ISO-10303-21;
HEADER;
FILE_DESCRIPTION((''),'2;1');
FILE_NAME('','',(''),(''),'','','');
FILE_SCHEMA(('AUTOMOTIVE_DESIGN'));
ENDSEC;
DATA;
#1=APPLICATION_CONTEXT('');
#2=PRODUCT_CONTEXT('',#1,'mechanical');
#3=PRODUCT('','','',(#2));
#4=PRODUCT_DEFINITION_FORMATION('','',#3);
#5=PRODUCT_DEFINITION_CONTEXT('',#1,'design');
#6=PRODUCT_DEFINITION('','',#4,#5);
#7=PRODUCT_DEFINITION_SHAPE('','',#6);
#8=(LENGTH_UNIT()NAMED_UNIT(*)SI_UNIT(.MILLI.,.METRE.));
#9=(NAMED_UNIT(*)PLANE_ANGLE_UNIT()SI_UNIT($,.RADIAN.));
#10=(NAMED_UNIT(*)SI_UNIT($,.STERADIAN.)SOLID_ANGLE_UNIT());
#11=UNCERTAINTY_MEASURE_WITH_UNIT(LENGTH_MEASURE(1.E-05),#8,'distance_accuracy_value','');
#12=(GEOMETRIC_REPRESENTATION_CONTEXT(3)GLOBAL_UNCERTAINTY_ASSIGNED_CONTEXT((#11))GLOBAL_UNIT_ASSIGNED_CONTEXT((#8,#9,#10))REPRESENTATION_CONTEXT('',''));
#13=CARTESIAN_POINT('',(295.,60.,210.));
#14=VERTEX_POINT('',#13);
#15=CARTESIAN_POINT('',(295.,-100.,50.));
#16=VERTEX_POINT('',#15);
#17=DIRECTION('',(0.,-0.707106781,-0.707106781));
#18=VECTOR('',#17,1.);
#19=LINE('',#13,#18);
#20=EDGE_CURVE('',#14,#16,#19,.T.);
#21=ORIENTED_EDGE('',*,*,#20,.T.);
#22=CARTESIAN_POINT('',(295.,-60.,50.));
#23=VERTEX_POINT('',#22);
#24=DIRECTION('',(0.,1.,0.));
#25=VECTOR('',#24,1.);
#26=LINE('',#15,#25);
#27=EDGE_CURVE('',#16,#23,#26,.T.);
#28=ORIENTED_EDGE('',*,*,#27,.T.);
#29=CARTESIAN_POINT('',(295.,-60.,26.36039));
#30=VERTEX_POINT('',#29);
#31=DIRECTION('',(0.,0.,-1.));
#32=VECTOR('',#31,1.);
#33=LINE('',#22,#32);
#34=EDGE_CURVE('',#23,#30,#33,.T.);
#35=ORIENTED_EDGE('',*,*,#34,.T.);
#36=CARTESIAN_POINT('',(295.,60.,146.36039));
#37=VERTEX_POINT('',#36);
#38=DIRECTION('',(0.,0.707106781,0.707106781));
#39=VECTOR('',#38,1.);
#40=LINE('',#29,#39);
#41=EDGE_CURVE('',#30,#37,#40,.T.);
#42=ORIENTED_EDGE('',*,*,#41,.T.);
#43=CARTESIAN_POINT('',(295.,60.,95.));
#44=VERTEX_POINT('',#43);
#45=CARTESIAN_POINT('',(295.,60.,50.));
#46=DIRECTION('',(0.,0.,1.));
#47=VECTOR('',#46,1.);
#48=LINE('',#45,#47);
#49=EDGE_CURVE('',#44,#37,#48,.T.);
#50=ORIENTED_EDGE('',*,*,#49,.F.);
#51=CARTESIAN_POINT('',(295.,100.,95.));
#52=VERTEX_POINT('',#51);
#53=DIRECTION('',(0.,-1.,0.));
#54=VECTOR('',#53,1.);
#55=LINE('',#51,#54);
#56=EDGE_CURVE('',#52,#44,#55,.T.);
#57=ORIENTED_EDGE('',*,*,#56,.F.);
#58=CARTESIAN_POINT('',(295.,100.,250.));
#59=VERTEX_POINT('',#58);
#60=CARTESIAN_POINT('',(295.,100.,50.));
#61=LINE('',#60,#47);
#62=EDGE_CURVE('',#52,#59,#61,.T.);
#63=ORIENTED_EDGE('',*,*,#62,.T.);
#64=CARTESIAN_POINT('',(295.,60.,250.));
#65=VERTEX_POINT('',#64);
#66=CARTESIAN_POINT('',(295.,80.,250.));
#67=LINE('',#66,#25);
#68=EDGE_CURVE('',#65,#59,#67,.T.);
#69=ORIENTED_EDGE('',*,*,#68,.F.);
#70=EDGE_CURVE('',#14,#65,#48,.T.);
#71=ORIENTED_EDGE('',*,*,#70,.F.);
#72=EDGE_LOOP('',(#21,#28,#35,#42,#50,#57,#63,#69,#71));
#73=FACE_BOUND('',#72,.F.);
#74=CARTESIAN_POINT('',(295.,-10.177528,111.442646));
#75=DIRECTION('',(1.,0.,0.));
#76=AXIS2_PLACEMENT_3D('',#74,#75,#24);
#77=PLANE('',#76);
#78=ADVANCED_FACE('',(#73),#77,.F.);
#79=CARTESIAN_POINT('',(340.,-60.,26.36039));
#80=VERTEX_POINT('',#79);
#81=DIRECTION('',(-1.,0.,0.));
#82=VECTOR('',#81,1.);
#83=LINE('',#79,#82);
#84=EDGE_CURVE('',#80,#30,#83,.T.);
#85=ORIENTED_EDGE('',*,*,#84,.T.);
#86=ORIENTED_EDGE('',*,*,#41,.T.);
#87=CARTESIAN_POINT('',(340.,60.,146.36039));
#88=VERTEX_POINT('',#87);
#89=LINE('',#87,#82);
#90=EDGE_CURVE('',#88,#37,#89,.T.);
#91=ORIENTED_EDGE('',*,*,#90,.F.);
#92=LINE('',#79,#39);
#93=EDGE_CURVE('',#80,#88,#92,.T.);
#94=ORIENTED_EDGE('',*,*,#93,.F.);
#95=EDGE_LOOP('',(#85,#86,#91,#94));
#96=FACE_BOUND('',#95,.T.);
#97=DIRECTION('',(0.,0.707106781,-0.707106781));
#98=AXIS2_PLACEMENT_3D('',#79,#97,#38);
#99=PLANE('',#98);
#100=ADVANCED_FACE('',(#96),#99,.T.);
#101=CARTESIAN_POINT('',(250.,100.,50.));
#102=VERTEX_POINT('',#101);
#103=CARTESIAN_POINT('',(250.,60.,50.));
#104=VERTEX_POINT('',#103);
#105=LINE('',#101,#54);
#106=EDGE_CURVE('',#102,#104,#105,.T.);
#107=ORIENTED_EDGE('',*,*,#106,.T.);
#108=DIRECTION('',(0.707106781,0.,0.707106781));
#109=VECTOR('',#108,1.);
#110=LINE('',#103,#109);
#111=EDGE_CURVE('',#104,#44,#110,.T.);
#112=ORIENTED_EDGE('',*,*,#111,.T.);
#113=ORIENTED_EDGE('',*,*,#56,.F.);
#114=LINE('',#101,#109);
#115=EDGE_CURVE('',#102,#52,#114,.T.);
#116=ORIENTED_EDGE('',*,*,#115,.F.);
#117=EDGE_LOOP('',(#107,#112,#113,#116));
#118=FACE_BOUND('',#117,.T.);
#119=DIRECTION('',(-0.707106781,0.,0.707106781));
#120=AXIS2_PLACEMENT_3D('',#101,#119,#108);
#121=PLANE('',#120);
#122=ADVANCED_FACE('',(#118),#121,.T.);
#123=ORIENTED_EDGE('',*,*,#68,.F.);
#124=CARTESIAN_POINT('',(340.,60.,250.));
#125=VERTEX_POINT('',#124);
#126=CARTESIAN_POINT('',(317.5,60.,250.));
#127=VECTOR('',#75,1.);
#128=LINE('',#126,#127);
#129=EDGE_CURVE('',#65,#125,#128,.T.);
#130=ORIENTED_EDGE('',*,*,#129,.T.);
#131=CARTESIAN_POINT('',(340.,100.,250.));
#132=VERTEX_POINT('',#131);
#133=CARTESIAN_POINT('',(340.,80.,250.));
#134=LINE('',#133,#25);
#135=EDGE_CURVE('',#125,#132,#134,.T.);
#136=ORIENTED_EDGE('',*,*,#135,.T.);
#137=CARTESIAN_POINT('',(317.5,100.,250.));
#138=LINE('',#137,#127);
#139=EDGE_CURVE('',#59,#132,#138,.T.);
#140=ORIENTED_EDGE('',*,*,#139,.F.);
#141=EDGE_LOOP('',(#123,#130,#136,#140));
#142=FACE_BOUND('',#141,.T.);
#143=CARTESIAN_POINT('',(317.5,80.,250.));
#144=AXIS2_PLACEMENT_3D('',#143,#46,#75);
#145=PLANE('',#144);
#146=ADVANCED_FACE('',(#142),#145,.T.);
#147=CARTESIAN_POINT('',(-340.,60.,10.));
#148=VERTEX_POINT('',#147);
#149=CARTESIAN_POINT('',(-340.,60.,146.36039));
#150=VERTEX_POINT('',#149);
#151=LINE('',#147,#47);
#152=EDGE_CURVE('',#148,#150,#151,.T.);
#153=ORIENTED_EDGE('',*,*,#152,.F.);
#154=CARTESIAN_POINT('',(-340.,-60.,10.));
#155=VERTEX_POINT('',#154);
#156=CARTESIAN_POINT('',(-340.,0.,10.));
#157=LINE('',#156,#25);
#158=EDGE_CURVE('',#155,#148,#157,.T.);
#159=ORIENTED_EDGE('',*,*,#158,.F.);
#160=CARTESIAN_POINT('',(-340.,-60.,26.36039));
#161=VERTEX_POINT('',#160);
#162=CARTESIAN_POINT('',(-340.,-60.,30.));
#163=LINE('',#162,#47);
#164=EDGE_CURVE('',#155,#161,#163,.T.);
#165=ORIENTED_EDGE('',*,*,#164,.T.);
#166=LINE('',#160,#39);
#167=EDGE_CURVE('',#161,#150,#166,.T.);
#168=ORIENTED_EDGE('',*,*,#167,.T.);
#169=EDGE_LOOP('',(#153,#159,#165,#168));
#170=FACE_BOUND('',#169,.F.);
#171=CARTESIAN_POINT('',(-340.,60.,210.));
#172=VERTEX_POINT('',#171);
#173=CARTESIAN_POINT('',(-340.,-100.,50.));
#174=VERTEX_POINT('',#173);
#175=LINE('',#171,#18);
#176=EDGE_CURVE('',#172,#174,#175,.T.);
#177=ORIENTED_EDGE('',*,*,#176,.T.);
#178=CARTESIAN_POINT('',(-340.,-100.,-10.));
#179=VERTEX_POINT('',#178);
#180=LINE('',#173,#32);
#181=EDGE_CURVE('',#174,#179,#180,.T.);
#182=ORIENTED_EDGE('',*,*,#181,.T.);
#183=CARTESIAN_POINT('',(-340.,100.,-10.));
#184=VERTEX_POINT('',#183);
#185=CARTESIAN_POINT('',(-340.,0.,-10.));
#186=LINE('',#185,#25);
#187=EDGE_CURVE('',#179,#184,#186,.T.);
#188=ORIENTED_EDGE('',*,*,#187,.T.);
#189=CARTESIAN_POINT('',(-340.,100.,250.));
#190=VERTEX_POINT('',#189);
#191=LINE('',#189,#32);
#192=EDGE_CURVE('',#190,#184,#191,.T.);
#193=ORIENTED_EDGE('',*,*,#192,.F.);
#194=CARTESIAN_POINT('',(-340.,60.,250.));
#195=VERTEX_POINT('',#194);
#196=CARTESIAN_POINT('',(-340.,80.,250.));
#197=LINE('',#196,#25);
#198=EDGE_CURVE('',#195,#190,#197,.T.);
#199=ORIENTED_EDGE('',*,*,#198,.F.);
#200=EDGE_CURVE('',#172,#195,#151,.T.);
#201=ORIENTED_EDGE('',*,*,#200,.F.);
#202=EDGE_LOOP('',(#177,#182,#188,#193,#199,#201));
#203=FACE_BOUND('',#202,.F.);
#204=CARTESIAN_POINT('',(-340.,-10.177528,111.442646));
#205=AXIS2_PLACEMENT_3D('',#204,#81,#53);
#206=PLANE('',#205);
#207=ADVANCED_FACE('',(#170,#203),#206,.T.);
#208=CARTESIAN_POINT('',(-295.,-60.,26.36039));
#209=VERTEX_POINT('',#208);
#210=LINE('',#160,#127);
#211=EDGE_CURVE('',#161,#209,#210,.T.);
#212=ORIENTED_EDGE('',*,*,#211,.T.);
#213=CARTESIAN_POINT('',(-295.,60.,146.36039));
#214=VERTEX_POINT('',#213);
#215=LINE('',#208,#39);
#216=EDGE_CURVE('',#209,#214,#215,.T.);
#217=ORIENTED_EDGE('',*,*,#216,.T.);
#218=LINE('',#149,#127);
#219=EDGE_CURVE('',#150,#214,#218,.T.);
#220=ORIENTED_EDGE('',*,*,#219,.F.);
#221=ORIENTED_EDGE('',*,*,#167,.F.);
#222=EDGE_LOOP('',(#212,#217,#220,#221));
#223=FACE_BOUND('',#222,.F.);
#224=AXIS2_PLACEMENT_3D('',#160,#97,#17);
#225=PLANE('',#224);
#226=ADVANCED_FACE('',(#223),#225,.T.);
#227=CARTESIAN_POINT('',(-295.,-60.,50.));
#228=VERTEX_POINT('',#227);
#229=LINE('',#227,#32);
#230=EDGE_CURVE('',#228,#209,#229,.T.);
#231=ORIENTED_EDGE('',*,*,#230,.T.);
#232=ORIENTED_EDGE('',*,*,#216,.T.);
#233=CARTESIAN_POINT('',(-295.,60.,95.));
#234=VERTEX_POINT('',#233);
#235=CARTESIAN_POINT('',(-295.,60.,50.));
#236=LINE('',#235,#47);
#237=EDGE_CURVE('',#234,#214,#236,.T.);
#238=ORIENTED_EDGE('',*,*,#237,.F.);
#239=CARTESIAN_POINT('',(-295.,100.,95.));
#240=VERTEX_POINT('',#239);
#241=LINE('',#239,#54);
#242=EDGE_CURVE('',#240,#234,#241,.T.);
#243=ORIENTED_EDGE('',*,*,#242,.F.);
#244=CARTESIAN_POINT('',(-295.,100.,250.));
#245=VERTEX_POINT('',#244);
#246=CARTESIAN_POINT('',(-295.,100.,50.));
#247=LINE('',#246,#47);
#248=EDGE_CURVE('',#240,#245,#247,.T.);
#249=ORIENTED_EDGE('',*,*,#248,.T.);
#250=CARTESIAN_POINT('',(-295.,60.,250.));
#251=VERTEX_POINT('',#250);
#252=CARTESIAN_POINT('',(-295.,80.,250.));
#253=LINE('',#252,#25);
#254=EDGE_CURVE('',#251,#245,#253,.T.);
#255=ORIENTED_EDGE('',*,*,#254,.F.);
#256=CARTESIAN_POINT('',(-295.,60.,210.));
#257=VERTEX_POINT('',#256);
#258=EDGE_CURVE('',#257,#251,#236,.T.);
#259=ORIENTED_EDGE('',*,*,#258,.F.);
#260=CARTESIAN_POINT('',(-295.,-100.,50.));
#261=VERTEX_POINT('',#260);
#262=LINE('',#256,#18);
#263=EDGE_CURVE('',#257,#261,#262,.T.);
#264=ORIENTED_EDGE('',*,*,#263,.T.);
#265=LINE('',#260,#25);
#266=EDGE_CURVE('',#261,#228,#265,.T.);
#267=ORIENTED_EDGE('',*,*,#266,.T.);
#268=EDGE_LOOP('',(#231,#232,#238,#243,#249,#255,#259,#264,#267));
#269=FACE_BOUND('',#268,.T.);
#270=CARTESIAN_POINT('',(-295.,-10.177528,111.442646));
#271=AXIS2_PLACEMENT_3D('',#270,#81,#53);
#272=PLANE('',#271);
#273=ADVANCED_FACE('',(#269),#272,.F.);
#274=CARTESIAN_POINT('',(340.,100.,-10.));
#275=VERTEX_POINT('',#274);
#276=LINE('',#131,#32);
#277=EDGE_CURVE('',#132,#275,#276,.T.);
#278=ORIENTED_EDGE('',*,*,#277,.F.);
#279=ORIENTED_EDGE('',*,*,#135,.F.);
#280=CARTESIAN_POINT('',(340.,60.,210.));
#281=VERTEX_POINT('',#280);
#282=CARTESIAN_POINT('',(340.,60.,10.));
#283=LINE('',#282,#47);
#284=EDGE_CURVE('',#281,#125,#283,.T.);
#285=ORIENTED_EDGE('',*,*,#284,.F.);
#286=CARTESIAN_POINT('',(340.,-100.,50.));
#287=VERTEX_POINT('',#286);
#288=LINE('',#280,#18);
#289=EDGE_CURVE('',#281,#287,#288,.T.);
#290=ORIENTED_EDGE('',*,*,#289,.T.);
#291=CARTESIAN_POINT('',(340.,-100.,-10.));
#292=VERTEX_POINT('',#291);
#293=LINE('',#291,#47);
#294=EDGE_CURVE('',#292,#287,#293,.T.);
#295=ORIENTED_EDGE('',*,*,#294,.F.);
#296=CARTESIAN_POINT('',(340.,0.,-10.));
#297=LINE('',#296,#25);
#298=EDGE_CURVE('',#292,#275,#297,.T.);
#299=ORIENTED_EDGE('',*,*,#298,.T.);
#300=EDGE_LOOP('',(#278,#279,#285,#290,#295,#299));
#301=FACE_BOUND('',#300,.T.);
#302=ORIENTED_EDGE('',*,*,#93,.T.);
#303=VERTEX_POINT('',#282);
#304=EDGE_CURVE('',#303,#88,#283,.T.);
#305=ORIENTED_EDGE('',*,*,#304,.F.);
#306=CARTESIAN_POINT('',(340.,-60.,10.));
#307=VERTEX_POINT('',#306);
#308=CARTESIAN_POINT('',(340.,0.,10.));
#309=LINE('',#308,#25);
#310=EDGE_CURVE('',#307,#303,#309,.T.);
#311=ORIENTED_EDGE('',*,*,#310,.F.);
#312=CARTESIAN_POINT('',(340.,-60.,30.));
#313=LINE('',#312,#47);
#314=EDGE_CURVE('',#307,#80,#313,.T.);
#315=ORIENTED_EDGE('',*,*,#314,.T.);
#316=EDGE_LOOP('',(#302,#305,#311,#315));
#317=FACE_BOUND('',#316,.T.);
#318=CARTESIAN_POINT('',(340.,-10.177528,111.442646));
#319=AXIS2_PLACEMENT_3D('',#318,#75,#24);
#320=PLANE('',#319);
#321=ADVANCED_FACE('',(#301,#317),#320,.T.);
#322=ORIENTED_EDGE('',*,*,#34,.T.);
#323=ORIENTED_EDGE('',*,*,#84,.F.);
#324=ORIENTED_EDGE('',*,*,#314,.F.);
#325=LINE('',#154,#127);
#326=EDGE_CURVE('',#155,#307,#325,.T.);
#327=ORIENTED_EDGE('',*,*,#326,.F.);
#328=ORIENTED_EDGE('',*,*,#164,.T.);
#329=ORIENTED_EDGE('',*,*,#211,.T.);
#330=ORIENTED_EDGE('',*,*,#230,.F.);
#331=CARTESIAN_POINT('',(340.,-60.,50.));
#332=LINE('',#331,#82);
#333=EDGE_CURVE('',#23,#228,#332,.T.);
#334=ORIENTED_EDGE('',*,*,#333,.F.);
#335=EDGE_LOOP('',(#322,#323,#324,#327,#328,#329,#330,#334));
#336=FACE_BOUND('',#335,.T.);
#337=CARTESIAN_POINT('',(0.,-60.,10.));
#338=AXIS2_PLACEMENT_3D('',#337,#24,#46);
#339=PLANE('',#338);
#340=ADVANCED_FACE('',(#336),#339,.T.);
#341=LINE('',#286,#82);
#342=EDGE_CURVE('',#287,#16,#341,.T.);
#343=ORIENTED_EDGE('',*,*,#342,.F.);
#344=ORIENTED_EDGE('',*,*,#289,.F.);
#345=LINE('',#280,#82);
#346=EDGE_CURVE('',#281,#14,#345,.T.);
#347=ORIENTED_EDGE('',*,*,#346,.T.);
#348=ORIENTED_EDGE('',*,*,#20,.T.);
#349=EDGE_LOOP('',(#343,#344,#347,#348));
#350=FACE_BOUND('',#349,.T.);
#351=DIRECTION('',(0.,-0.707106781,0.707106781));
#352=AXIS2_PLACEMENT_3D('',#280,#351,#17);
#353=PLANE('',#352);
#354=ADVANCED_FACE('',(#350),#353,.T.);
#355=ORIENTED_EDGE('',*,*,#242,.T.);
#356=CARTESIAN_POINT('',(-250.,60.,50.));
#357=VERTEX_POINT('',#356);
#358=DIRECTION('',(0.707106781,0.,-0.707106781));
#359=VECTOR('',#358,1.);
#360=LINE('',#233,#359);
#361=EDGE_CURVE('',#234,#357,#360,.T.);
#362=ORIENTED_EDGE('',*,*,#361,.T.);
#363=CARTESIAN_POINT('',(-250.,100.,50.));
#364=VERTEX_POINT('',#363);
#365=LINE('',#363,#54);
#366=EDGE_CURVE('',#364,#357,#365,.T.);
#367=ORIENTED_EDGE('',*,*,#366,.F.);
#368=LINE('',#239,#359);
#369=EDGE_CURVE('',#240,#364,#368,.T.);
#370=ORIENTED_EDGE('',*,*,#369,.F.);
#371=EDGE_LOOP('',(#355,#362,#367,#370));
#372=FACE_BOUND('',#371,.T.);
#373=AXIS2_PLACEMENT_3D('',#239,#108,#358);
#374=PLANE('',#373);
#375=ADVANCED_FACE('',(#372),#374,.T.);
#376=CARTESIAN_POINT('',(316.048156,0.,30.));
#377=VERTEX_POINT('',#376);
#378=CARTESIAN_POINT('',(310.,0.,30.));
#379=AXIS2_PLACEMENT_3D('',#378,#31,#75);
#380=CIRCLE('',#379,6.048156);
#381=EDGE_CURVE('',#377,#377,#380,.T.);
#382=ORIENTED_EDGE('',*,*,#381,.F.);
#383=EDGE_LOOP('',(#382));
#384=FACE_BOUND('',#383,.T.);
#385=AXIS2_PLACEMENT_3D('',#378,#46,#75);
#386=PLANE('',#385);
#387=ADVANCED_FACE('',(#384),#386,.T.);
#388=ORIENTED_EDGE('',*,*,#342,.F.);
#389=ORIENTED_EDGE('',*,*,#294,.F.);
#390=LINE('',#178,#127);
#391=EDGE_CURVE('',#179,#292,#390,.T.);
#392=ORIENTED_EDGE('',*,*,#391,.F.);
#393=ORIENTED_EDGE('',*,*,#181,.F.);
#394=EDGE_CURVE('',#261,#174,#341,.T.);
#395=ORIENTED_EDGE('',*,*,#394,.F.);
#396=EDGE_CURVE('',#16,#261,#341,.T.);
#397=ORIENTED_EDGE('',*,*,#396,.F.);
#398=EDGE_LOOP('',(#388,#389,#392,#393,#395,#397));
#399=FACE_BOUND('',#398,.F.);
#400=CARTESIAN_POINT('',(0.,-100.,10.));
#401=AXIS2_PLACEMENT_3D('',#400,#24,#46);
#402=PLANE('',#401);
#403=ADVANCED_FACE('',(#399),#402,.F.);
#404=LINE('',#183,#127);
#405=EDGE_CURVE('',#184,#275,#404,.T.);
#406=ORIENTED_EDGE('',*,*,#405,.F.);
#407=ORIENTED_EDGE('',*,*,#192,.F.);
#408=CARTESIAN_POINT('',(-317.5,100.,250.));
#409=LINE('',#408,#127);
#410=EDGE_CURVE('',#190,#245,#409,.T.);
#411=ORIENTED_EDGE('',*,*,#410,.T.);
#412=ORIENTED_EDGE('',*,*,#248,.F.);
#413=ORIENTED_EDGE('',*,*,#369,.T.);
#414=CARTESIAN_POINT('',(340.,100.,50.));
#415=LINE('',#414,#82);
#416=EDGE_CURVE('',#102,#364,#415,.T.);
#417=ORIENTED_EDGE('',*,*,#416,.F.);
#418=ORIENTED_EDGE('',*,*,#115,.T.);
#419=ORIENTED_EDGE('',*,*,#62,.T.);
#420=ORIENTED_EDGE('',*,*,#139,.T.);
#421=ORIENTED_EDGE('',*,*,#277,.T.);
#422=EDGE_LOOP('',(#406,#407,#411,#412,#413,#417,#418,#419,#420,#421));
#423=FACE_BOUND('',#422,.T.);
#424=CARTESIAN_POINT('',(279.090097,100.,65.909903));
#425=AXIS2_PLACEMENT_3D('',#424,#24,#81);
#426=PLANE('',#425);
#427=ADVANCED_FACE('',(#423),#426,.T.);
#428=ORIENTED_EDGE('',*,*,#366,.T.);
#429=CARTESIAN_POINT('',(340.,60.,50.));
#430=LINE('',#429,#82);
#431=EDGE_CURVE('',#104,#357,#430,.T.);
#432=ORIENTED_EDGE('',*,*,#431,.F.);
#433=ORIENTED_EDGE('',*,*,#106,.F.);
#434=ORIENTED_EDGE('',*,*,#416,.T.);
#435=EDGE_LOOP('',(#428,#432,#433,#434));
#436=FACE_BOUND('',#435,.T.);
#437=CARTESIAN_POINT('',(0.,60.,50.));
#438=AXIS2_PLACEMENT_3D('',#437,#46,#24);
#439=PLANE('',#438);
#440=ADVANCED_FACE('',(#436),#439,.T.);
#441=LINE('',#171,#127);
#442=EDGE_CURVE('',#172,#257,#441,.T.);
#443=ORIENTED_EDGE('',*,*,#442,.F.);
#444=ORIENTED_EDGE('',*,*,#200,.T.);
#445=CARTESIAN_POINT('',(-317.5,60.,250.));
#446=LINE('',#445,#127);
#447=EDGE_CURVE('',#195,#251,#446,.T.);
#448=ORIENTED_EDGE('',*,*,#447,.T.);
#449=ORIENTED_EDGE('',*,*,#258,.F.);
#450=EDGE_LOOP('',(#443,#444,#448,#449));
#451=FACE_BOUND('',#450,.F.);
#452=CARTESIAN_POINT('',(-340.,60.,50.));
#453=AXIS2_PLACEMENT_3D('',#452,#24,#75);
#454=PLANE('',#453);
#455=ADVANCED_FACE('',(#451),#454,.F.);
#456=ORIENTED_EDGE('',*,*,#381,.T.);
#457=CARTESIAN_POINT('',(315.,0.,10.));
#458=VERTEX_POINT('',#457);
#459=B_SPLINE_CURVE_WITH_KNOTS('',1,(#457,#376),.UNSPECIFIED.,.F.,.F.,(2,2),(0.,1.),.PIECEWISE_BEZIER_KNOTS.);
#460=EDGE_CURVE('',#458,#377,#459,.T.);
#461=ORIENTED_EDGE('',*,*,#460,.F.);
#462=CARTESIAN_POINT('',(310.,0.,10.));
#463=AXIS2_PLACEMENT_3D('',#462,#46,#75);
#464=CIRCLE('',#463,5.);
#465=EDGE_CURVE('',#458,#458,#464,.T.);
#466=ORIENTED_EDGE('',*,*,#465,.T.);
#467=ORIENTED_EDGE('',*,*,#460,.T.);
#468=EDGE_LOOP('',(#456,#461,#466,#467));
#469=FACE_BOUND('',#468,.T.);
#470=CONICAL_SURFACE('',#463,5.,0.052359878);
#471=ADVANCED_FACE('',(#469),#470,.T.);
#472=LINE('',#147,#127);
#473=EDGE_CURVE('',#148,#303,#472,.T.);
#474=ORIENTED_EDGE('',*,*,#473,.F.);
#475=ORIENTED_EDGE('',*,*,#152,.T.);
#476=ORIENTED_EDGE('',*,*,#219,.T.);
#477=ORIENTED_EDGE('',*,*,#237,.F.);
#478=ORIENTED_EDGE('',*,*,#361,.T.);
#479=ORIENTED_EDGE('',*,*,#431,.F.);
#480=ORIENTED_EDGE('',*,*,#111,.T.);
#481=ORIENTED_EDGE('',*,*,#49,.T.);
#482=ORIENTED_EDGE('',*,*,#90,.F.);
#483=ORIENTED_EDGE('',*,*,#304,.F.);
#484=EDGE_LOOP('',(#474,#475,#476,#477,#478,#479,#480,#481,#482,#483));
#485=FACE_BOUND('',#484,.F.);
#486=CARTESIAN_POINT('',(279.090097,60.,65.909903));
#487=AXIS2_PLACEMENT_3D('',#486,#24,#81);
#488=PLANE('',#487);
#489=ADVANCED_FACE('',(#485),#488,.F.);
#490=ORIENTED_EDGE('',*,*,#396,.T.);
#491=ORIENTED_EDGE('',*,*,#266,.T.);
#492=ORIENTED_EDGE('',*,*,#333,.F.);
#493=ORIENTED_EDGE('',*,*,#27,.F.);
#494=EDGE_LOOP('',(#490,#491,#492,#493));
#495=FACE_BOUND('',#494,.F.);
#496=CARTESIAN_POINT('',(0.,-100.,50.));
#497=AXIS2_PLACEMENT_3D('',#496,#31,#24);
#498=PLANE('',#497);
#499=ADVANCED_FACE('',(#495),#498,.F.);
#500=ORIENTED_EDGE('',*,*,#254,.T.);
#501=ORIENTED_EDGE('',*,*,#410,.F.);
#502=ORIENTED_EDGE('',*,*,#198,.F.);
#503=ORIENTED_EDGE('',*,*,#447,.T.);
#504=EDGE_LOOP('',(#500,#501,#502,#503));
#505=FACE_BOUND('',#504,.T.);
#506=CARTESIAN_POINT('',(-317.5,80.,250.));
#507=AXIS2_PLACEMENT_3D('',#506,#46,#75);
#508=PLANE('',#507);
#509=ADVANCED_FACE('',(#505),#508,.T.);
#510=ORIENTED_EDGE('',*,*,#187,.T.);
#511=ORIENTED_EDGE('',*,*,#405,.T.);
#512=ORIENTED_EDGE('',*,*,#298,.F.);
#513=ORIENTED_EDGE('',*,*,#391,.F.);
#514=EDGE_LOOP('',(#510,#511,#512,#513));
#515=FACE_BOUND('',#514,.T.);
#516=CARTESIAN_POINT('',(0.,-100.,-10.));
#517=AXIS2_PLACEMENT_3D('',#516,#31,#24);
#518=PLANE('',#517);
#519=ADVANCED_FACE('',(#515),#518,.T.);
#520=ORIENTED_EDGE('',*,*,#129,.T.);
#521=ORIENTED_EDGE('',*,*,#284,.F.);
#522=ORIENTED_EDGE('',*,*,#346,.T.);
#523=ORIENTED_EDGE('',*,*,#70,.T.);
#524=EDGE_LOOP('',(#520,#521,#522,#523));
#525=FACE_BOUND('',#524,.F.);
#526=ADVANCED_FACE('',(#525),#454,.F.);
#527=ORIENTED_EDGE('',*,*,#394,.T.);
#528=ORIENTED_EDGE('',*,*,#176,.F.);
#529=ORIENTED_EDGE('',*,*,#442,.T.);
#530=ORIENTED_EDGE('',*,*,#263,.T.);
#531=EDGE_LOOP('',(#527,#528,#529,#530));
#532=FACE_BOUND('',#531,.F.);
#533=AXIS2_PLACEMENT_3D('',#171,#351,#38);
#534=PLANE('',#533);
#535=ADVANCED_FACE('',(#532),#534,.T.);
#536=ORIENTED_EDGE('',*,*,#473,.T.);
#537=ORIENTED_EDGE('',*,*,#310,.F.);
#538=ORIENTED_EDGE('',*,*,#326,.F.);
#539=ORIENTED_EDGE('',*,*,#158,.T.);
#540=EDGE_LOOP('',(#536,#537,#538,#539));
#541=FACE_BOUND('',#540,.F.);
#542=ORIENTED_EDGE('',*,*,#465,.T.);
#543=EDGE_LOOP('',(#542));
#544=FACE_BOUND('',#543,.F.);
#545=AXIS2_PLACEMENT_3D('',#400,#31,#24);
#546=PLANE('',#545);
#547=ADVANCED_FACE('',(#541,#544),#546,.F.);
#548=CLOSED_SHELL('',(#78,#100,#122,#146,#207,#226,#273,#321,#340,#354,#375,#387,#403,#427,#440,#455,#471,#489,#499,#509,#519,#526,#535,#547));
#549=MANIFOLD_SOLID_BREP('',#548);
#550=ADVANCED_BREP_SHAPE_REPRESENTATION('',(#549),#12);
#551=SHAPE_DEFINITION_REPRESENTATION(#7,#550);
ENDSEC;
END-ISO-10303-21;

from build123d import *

# Parameters (mm, degrees)
F0_W      = 200
F0_H      = 20
F1_DEPTH  = 340
F2_W      = 40
F2_H      = 40
F3_DEPTH  = 340
F4_W      = 45
F4_H      = 40
F5_DEPTH  = 200
F7_DEPTH  = 45
F9_DEPTH  = 40
F10_R     = 5
F11_DEPTH = 20
F11_TAPER = -3


# Not quite as in the source:
# - a pattern or mirror of a feature is missing from the dataset's text; its kind, count and spacing are read off the source's solid


with BuildPart() as f1:
    # F0 (on Right) → F1 (new body, symmetric)
    with BuildSketch(Plane.YZ):
        Rectangle(F0_W, F0_H)
    extrude(amount=F1_DEPTH, both=True)

    # F2 (on Right) → F3 (join, symmetric)
    with BuildSketch(Plane.YZ):
        with Locations((80, 30)):
            Rectangle(F2_W, F2_H)
        with Locations((-80, 30)):
            Rectangle(F2_W, F2_H)
    extrude(amount=F3_DEPTH, both=True)

    # F4 (on face) → F5 (join)
    with BuildSketch(Plane.XY.offset(50)):
        with Locations((-317.5, 80)):
            Rectangle(F4_W, F4_H)
        with Locations((317.5, 80)):
            Rectangle(F4_W, F4_H)
    extrude(amount=F5_DEPTH)

    # F6 (on face) → F7 (join)
    with BuildSketch(Plane.YZ.offset(340)):
        Polygon((60, 210), (-100, 50), (-60, 50), (-60, 26.3603896932), (60, 146.3603896932), align=None)
    f7 = extrude(amount=-F7_DEPTH)

    # F7_copies: F7 across plane
    add(f7.mirror(Plane(origin=(0, 0, 0), x_dir=(0, 0, -1), z_dir=(-1, 0, 0))))

    # F8 (on face) → F9 (join)
    with BuildSketch(Plane(origin=(0, 100, 0), x_dir=(-1, 0, 0), z_dir=(0, 1, 0))):
        Polygon((-250, 50), (-295, 95), (-295, 50), align=None)
        Polygon((295, 50), (295, 95), (250, 50), align=None)
    extrude(amount=-F9_DEPTH)

    # F10 (on face) → F11 (join)
    with BuildSketch(Plane.XY.offset(10)):
        with Locations((310, 0)):
            Circle(F10_R)
    extrude(amount=F11_DEPTH, taper=F11_TAPER)


solid = f1.part
